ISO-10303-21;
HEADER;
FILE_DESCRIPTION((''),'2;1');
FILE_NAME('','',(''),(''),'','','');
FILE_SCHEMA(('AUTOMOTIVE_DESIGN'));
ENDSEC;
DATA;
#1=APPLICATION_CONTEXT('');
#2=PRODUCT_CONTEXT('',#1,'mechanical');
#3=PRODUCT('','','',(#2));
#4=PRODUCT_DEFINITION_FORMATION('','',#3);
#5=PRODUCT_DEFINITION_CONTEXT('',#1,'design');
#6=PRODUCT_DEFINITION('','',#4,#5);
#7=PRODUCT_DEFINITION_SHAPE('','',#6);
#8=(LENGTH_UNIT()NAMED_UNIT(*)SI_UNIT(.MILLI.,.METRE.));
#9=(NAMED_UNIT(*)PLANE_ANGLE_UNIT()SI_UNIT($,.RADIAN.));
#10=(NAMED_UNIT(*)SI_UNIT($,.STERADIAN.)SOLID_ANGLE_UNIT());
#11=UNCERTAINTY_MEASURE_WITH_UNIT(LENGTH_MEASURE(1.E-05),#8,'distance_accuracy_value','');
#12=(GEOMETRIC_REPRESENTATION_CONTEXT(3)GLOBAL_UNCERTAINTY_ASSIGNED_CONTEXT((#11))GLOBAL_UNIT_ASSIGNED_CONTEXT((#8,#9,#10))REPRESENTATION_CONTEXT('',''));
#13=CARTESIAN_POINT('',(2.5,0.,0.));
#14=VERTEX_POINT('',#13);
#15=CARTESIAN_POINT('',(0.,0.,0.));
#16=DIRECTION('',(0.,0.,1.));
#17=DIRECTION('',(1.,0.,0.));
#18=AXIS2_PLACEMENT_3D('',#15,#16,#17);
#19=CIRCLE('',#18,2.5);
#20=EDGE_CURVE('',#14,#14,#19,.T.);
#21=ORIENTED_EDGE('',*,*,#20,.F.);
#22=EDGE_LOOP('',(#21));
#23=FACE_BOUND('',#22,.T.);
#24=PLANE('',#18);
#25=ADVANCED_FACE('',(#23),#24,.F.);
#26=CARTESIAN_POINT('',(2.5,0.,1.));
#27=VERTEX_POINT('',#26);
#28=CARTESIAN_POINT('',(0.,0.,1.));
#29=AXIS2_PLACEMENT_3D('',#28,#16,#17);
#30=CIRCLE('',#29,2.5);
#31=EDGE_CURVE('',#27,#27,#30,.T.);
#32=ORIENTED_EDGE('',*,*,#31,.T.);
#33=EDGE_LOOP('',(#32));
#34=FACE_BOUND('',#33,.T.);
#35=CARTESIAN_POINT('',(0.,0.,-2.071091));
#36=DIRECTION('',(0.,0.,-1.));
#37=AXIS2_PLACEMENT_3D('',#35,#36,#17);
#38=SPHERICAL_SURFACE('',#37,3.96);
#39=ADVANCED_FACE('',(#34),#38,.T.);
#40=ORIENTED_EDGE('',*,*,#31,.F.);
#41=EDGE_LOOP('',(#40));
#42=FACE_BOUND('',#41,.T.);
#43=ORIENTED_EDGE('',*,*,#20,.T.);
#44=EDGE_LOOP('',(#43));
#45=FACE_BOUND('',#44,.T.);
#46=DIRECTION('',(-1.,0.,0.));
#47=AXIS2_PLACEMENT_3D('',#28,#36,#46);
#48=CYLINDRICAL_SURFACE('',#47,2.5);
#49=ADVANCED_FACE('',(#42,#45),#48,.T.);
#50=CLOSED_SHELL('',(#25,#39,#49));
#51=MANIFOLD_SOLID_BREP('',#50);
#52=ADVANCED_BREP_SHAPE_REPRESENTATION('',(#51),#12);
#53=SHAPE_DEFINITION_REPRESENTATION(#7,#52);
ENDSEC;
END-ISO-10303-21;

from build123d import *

# Parameters (mm, degrees)
SKETCH1_R           = 2.5
BOSS_EXTRUDE1_DEPTH = 1


with BuildPart() as part:
    # Sketch1 → Boss-Extrude1 (new body)
    with BuildSketch(Plane.XY):
        Circle(SKETCH1_R)
    extrude(amount=BOSS_EXTRUDE1_DEPTH)

    # Sketch4 → Revolve8 (revolve)
    with BuildSketch(Plane(origin=(0, 0, 0), x_dir=(1, 0, 0), z_dir=(0, 1, 0))):
        with BuildLine():
            Line((2.5, -1), (0, -1))
            Line((0, -1), (0, -1.888908989))
            ThreePointArc((0, -1.888908989), (1.326664915, -1.660069693), (2.5, -1))
        make_face()
    revolve(axis=Axis((0, 0, 1), (0, 0, 1)))


solid = part.part
